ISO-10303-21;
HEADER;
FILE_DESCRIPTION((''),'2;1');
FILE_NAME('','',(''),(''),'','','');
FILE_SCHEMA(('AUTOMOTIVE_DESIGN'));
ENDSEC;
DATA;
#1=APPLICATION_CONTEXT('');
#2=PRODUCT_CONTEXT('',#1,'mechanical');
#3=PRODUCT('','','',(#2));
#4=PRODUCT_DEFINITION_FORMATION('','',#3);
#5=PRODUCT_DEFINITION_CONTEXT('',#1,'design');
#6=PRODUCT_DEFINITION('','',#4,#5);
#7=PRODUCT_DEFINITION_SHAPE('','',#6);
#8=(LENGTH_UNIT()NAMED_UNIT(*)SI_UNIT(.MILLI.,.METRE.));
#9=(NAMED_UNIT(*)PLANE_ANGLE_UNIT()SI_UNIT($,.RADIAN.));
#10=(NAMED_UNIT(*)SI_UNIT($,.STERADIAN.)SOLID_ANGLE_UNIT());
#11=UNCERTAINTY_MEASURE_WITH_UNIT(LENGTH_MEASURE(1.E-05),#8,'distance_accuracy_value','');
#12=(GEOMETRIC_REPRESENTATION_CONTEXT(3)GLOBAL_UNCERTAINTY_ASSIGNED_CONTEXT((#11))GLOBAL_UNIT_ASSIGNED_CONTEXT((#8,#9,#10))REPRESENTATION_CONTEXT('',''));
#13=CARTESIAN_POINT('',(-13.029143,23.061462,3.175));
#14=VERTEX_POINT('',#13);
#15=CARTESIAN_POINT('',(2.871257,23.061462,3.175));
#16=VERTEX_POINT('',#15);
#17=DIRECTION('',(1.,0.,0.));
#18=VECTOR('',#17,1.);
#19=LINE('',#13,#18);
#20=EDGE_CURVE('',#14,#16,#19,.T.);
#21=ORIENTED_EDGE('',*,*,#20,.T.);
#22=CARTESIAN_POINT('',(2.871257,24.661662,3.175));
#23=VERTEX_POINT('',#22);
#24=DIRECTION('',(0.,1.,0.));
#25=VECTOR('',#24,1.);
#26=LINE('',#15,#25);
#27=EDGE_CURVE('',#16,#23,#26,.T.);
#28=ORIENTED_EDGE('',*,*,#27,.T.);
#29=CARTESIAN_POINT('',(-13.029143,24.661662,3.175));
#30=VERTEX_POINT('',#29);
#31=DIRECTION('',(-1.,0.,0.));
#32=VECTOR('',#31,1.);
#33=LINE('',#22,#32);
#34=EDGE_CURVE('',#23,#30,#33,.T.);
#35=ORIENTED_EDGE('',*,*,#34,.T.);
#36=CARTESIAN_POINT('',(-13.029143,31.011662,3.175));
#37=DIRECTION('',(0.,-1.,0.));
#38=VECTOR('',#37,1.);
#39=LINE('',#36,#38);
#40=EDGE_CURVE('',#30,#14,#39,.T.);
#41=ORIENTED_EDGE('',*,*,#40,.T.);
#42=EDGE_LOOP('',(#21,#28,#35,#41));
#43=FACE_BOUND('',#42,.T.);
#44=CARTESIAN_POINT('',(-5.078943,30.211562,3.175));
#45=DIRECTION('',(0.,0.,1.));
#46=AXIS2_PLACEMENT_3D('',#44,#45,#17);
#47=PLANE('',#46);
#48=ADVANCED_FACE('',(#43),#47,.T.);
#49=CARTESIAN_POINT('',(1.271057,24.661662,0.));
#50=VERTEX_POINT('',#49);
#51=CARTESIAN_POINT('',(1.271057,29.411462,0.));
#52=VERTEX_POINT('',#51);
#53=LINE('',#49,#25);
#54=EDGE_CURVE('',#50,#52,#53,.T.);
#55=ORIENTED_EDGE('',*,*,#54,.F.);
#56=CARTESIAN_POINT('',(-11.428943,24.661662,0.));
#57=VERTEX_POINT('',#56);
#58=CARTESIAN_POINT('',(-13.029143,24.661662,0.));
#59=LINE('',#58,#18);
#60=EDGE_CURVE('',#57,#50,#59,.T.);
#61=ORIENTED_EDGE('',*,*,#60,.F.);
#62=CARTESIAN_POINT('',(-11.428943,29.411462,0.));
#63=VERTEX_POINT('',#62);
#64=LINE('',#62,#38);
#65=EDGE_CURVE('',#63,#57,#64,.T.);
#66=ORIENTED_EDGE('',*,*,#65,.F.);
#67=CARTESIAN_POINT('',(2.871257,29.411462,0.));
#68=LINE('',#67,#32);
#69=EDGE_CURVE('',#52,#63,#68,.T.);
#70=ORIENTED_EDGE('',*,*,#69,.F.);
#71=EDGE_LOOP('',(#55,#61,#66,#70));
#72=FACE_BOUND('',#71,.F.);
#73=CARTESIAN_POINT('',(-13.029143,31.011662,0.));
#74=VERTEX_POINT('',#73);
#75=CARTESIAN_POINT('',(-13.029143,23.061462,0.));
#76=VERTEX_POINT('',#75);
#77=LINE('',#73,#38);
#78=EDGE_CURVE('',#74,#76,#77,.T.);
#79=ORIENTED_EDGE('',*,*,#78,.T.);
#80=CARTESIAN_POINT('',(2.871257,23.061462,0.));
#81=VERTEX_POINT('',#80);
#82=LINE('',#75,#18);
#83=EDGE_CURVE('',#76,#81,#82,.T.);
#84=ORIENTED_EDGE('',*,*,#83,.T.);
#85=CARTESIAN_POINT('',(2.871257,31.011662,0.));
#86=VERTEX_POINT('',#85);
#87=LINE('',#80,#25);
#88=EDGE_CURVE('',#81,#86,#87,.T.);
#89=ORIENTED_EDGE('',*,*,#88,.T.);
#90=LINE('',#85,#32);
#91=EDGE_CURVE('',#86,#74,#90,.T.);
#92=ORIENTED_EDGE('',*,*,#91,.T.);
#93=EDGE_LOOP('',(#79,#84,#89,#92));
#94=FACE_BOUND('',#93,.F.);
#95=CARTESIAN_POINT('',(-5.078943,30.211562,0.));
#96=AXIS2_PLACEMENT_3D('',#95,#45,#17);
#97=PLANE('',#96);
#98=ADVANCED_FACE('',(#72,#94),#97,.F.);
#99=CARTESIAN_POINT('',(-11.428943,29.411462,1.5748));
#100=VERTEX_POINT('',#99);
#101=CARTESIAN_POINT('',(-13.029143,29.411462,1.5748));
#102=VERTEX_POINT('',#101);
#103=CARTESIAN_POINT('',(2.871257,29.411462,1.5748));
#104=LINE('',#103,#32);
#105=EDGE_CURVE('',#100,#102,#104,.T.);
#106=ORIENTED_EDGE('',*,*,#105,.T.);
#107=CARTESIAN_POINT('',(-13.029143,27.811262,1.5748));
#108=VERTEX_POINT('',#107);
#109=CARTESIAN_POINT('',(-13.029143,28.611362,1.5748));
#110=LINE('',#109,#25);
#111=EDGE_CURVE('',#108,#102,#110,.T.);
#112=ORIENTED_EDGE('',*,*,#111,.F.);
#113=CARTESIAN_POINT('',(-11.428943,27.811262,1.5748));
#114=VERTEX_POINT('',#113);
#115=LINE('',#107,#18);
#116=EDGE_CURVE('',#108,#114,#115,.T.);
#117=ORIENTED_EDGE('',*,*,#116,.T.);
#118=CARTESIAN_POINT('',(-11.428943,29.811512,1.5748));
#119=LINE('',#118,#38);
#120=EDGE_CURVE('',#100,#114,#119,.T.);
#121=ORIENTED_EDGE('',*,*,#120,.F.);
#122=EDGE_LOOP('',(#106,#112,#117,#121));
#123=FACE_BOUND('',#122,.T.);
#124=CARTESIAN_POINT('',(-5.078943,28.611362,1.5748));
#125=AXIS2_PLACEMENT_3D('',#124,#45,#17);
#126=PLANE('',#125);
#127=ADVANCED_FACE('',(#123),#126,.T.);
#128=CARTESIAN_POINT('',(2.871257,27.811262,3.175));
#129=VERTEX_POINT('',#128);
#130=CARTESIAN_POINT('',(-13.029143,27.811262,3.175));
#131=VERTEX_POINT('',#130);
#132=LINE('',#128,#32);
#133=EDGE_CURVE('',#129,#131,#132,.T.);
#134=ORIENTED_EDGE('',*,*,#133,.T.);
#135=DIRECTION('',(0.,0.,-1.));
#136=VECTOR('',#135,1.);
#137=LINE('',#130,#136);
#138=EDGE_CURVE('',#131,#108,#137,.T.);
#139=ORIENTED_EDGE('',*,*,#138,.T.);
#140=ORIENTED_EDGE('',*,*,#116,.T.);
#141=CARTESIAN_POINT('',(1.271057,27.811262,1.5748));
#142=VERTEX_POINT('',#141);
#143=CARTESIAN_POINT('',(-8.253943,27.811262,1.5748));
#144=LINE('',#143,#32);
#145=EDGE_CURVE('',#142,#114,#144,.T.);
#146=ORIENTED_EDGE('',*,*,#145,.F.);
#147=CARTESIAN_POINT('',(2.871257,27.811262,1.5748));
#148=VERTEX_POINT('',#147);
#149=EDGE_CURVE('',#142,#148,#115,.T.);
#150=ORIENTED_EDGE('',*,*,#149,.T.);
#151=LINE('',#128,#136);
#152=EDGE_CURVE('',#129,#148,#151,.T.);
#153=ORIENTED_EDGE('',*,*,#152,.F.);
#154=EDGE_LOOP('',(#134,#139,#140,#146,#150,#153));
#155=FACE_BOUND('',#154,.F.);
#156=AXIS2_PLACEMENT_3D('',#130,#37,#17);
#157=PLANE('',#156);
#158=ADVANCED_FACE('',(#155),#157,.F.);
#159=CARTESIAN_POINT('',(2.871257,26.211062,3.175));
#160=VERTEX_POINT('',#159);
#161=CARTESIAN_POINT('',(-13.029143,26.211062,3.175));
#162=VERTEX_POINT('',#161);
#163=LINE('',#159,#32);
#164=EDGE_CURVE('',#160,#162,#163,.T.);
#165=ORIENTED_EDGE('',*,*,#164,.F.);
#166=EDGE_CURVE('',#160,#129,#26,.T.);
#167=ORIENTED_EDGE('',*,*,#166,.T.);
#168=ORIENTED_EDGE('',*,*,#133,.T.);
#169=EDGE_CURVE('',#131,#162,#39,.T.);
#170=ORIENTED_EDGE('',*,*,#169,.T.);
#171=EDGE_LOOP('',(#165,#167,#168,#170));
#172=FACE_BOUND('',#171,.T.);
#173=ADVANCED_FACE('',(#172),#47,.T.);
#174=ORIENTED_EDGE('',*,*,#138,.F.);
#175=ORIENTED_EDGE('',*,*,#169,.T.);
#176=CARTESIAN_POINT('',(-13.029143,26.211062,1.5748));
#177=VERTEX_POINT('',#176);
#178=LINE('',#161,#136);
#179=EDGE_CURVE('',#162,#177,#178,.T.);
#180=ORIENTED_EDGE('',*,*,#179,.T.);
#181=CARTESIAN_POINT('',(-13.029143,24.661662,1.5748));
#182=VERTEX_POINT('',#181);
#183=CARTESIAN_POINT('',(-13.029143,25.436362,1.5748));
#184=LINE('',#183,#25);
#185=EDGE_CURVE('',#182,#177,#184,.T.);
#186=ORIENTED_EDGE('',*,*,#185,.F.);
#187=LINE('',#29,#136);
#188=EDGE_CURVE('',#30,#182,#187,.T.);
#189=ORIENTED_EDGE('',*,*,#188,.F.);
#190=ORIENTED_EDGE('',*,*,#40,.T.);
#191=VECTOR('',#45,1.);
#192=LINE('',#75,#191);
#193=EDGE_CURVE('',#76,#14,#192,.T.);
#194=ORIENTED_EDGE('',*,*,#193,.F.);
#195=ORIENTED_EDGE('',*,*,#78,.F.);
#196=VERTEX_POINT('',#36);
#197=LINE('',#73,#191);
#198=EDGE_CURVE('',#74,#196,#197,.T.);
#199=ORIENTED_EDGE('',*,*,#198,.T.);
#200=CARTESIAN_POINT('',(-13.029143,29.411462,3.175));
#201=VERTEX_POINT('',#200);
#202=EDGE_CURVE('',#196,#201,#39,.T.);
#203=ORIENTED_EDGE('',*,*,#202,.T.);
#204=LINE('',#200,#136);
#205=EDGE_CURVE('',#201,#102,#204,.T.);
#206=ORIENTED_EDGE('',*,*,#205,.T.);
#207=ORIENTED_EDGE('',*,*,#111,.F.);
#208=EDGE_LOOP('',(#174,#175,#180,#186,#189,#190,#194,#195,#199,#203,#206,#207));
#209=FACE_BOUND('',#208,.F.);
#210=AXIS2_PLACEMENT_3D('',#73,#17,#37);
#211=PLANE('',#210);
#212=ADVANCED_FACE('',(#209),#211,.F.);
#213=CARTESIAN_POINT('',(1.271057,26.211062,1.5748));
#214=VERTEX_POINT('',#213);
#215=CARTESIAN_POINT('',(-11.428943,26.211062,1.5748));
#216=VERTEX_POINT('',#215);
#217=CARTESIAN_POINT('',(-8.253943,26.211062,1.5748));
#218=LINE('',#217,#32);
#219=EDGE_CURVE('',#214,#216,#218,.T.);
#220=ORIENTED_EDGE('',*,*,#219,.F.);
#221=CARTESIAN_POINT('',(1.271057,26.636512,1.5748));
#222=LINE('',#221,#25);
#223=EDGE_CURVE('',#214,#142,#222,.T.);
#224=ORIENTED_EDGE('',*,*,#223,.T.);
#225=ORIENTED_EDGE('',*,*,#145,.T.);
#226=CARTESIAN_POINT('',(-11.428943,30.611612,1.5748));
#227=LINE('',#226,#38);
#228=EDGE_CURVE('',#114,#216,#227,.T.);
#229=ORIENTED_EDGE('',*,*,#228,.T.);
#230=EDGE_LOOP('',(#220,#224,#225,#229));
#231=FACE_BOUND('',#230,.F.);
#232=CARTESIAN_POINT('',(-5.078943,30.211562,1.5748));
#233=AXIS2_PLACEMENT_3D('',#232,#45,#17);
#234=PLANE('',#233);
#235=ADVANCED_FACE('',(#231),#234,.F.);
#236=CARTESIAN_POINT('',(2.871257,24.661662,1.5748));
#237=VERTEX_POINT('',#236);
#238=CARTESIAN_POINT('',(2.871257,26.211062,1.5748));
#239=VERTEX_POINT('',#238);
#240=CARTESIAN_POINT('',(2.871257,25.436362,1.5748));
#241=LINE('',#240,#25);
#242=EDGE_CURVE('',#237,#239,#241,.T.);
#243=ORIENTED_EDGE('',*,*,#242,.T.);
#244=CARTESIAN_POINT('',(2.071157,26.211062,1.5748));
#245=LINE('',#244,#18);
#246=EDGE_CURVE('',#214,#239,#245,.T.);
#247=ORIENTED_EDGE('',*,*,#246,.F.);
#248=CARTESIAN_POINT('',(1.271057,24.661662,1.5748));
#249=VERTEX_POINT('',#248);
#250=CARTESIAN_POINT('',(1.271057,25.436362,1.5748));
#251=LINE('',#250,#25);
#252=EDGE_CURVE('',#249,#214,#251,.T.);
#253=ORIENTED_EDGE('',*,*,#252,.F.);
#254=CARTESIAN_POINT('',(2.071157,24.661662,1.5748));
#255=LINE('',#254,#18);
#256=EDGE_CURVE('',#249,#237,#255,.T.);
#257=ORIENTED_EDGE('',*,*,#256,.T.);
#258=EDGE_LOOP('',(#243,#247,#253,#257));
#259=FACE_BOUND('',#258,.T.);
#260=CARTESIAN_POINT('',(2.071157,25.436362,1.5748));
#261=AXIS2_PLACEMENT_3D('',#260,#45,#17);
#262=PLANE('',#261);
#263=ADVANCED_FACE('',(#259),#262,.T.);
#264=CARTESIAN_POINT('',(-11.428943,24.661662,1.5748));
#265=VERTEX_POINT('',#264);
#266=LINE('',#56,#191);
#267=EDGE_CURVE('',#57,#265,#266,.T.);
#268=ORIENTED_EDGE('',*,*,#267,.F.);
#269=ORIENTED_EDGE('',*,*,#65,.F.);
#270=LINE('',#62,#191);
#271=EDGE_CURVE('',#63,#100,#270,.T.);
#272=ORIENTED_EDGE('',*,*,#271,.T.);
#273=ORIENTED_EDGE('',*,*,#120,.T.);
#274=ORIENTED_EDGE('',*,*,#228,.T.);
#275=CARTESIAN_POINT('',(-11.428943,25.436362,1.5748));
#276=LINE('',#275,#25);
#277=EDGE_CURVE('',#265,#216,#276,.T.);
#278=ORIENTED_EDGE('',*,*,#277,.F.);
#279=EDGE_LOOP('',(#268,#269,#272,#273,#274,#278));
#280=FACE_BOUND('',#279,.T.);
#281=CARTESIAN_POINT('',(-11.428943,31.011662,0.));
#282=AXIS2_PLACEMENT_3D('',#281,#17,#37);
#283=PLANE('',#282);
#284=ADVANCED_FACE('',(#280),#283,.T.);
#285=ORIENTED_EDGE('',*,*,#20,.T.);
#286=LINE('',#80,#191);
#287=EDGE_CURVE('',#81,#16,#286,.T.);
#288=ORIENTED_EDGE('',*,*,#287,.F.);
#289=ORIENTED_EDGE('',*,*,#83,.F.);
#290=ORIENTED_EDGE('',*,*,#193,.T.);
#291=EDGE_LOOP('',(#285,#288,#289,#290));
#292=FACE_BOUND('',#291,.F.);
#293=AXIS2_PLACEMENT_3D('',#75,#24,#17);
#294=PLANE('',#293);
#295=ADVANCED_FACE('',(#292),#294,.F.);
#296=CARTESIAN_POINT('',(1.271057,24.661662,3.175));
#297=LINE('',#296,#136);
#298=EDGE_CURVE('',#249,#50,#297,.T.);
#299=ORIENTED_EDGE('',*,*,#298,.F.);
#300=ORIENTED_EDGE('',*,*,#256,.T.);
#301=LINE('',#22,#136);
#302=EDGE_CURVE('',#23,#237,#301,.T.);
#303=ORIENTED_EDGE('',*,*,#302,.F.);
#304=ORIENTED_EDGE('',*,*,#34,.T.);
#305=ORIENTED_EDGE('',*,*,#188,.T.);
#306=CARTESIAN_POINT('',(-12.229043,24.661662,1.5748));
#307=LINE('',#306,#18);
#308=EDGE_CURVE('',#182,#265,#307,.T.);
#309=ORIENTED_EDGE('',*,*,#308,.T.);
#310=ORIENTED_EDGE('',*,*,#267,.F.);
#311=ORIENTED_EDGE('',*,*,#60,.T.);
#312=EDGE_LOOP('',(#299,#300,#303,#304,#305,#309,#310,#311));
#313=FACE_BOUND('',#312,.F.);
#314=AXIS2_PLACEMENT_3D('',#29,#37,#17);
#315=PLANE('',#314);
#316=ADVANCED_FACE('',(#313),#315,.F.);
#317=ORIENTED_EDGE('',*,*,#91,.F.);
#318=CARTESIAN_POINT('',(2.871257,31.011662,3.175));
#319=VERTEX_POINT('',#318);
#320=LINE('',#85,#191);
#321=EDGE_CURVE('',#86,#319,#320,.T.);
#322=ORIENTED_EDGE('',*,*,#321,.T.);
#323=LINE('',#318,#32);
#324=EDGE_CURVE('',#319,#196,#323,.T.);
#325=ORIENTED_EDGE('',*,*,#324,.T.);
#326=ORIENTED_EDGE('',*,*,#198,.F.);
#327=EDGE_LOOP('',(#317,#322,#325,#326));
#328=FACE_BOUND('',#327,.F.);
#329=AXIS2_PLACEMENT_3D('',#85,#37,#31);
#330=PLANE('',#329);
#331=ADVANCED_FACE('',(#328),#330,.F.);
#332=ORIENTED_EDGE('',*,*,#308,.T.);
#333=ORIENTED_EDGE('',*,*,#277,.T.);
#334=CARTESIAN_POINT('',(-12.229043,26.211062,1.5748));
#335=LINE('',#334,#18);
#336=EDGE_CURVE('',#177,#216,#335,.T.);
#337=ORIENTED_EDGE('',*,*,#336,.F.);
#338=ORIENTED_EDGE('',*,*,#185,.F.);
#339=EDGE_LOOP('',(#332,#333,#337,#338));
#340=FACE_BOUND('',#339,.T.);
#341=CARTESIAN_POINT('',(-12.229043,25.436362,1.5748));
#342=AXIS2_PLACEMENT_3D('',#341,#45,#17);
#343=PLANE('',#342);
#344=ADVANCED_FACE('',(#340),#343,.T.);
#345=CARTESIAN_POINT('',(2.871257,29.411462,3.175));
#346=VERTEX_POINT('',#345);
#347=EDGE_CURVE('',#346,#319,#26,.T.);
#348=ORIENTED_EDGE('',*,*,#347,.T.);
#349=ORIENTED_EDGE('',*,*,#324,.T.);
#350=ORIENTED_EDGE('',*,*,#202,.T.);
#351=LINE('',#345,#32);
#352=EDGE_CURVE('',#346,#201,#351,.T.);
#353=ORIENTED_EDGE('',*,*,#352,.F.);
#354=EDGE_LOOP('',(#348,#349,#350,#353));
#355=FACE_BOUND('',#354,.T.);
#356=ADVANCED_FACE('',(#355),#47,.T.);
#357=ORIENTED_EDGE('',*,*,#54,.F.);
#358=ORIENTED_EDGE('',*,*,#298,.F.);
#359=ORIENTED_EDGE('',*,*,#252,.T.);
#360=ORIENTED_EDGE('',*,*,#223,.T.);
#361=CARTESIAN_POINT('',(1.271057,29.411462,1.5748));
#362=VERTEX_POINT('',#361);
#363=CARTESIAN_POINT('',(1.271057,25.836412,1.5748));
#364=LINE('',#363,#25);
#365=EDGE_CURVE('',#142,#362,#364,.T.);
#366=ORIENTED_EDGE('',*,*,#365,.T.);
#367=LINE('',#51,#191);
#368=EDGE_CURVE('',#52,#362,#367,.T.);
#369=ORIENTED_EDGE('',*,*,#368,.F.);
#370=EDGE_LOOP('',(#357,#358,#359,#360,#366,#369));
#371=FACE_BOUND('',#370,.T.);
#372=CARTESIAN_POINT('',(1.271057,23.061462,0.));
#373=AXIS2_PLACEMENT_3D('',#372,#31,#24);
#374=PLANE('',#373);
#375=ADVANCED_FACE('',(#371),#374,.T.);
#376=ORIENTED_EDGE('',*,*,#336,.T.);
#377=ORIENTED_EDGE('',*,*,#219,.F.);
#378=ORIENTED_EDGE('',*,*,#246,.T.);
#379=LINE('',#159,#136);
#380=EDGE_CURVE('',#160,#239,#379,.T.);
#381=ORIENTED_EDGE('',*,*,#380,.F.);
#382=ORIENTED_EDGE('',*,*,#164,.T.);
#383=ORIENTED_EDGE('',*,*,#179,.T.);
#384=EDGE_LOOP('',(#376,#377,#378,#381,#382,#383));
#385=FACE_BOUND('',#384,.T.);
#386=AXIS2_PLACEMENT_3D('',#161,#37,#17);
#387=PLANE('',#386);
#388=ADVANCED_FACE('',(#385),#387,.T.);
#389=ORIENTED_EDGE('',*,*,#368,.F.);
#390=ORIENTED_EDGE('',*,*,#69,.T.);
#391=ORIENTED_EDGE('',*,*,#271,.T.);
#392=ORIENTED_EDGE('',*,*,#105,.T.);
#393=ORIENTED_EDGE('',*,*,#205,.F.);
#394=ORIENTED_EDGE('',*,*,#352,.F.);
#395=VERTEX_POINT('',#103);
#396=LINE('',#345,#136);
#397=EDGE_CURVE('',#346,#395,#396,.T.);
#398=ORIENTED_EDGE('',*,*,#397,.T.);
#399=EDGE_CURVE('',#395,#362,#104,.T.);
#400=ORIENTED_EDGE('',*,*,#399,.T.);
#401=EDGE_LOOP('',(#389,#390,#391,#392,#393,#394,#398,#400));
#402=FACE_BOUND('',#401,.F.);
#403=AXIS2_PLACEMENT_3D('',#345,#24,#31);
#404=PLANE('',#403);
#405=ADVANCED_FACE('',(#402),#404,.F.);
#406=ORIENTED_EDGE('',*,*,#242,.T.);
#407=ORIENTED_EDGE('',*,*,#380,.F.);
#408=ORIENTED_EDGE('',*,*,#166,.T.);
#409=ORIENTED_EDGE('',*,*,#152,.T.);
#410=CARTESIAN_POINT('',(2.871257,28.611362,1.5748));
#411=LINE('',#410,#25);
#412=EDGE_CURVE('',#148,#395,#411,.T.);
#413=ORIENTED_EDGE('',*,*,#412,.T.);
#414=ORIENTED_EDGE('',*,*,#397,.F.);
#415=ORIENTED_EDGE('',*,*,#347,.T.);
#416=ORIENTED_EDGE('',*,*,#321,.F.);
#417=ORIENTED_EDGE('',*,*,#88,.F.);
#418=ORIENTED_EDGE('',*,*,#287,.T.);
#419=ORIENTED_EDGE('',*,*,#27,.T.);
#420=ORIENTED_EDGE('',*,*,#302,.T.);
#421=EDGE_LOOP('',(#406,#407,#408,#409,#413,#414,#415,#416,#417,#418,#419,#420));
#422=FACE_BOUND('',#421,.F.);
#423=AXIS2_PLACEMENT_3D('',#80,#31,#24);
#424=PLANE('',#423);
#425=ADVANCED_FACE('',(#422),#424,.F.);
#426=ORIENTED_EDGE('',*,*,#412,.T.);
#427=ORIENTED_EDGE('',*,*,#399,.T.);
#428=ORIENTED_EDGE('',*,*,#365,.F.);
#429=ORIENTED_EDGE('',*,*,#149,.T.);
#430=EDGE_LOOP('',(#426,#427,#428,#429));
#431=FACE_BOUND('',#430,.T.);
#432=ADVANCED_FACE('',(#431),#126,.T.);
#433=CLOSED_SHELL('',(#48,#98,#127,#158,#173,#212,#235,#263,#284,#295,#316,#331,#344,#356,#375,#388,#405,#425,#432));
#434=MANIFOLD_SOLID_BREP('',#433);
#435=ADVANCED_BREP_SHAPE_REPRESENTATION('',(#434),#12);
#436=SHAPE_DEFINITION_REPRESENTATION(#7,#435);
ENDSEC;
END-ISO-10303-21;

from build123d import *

# Parameters (mm, degrees)
F0_W     = 12.7
F0_H     = 1.6002
F0_H_2   = 1.5494
F0_W_2   = 1.6002
F1_DEPTH = 3.175
F2_T     = -1.6002
F3_DEPTH = 25.4
F4_W     = 12.7
F4_H     = 1.6002
F4_W_2   = 1.6002
F4_H_2   = 1.5494
F5_DEPTH = 1.6002


with BuildPart() as f1:
    # F0 (on Top) → F1 (new body)
    with BuildSketch(Plane.XY):
        with Locations((-5.0789434463, 30.2115620618)):
            Rectangle(F0_W, F0_H)
        with Locations((-5.0789434463, 28.6113620618)):
            Rectangle(F0_W, F0_H)
        with Locations((-5.0789434463, 25.4363620618)):
            Rectangle(F0_W, F0_H_2)
        with Locations((-5.0789434463, 23.8615620618)):
            Rectangle(F0_W, F0_H)
        with Locations((-5.0789434463, 27.0111620618)):
            Rectangle(F0_W, F0_H)
        with Locations((-12.2290434463, 30.2115620618)):
            Rectangle(F0_W_2, F0_H)
        with Locations((-12.2290434463, 27.0111620618)):
            Rectangle(F0_W_2, F0_H)
        with Locations((-12.2290434463, 23.8615620618)):
            Rectangle(F0_W_2, F0_H)
        with Locations((2.0711565537, 30.2115620618)):
            Rectangle(F0_W_2, F0_H)
        with Locations((2.0711565537, 27.0111620618)):
            Rectangle(F0_W_2, F0_H)
        with Locations((2.0711565537, 23.8615620618)):
            Rectangle(F0_W_2, F0_H)
        with Locations((-12.2290434463, 28.6113620618)):
            Rectangle(F0_W_2, F0_H)
        with Locations((-12.2290434463, 25.4363620618)):
            Rectangle(F0_W_2, F0_H_2)
        with Locations((2.0711565537, 28.6113620618)):
            Rectangle(F0_W_2, F0_H)
        with Locations((2.0711565537, 25.4363620618)):
            Rectangle(F0_W_2, F0_H_2)
    extrude(amount=F1_DEPTH)

    # F2
    f2_openings = [f1.faces().sort_by_distance(p)[0] for p in [
        (-5.078943, 27.036562, 0),
    ]]
    offset(amount=F2_T, openings=f2_openings)

    # F0 (on Top) → F3 (cut)
    with BuildSketch(Plane.XY):
        with Locations((-5.0789434463, 25.4363620618)):
            Rectangle(F0_W, F0_H_2)
        with Locations((-5.0789434463, 28.6113620618)):
            Rectangle(F0_W, F0_H)
    extrude(amount=F3_DEPTH, mode=Mode.SUBTRACT)

    # F4 (on face) → F5 (cut)
    with BuildSketch(Plane.XY.offset(3.175)):
        with Locations((-5.0789434463, 28.6113620618)):
            Rectangle(F4_W, F4_H)
        with Locations((2.0711565537, 28.6113620618)):
            Rectangle(F4_W_2, F4_H)
        with Locations((-12.2290434463, 28.6113620618)):
            Rectangle(F4_W_2, F4_H)
        with Locations((2.0711565537, 25.4363620618)):
            Rectangle(F4_W_2, F4_H_2)
        with Locations((-12.2290434463, 25.4363620618)):
            Rectangle(F4_W_2, F4_H_2)
    extrude(amount=-F5_DEPTH, mode=Mode.SUBTRACT)


solid = f1.part
